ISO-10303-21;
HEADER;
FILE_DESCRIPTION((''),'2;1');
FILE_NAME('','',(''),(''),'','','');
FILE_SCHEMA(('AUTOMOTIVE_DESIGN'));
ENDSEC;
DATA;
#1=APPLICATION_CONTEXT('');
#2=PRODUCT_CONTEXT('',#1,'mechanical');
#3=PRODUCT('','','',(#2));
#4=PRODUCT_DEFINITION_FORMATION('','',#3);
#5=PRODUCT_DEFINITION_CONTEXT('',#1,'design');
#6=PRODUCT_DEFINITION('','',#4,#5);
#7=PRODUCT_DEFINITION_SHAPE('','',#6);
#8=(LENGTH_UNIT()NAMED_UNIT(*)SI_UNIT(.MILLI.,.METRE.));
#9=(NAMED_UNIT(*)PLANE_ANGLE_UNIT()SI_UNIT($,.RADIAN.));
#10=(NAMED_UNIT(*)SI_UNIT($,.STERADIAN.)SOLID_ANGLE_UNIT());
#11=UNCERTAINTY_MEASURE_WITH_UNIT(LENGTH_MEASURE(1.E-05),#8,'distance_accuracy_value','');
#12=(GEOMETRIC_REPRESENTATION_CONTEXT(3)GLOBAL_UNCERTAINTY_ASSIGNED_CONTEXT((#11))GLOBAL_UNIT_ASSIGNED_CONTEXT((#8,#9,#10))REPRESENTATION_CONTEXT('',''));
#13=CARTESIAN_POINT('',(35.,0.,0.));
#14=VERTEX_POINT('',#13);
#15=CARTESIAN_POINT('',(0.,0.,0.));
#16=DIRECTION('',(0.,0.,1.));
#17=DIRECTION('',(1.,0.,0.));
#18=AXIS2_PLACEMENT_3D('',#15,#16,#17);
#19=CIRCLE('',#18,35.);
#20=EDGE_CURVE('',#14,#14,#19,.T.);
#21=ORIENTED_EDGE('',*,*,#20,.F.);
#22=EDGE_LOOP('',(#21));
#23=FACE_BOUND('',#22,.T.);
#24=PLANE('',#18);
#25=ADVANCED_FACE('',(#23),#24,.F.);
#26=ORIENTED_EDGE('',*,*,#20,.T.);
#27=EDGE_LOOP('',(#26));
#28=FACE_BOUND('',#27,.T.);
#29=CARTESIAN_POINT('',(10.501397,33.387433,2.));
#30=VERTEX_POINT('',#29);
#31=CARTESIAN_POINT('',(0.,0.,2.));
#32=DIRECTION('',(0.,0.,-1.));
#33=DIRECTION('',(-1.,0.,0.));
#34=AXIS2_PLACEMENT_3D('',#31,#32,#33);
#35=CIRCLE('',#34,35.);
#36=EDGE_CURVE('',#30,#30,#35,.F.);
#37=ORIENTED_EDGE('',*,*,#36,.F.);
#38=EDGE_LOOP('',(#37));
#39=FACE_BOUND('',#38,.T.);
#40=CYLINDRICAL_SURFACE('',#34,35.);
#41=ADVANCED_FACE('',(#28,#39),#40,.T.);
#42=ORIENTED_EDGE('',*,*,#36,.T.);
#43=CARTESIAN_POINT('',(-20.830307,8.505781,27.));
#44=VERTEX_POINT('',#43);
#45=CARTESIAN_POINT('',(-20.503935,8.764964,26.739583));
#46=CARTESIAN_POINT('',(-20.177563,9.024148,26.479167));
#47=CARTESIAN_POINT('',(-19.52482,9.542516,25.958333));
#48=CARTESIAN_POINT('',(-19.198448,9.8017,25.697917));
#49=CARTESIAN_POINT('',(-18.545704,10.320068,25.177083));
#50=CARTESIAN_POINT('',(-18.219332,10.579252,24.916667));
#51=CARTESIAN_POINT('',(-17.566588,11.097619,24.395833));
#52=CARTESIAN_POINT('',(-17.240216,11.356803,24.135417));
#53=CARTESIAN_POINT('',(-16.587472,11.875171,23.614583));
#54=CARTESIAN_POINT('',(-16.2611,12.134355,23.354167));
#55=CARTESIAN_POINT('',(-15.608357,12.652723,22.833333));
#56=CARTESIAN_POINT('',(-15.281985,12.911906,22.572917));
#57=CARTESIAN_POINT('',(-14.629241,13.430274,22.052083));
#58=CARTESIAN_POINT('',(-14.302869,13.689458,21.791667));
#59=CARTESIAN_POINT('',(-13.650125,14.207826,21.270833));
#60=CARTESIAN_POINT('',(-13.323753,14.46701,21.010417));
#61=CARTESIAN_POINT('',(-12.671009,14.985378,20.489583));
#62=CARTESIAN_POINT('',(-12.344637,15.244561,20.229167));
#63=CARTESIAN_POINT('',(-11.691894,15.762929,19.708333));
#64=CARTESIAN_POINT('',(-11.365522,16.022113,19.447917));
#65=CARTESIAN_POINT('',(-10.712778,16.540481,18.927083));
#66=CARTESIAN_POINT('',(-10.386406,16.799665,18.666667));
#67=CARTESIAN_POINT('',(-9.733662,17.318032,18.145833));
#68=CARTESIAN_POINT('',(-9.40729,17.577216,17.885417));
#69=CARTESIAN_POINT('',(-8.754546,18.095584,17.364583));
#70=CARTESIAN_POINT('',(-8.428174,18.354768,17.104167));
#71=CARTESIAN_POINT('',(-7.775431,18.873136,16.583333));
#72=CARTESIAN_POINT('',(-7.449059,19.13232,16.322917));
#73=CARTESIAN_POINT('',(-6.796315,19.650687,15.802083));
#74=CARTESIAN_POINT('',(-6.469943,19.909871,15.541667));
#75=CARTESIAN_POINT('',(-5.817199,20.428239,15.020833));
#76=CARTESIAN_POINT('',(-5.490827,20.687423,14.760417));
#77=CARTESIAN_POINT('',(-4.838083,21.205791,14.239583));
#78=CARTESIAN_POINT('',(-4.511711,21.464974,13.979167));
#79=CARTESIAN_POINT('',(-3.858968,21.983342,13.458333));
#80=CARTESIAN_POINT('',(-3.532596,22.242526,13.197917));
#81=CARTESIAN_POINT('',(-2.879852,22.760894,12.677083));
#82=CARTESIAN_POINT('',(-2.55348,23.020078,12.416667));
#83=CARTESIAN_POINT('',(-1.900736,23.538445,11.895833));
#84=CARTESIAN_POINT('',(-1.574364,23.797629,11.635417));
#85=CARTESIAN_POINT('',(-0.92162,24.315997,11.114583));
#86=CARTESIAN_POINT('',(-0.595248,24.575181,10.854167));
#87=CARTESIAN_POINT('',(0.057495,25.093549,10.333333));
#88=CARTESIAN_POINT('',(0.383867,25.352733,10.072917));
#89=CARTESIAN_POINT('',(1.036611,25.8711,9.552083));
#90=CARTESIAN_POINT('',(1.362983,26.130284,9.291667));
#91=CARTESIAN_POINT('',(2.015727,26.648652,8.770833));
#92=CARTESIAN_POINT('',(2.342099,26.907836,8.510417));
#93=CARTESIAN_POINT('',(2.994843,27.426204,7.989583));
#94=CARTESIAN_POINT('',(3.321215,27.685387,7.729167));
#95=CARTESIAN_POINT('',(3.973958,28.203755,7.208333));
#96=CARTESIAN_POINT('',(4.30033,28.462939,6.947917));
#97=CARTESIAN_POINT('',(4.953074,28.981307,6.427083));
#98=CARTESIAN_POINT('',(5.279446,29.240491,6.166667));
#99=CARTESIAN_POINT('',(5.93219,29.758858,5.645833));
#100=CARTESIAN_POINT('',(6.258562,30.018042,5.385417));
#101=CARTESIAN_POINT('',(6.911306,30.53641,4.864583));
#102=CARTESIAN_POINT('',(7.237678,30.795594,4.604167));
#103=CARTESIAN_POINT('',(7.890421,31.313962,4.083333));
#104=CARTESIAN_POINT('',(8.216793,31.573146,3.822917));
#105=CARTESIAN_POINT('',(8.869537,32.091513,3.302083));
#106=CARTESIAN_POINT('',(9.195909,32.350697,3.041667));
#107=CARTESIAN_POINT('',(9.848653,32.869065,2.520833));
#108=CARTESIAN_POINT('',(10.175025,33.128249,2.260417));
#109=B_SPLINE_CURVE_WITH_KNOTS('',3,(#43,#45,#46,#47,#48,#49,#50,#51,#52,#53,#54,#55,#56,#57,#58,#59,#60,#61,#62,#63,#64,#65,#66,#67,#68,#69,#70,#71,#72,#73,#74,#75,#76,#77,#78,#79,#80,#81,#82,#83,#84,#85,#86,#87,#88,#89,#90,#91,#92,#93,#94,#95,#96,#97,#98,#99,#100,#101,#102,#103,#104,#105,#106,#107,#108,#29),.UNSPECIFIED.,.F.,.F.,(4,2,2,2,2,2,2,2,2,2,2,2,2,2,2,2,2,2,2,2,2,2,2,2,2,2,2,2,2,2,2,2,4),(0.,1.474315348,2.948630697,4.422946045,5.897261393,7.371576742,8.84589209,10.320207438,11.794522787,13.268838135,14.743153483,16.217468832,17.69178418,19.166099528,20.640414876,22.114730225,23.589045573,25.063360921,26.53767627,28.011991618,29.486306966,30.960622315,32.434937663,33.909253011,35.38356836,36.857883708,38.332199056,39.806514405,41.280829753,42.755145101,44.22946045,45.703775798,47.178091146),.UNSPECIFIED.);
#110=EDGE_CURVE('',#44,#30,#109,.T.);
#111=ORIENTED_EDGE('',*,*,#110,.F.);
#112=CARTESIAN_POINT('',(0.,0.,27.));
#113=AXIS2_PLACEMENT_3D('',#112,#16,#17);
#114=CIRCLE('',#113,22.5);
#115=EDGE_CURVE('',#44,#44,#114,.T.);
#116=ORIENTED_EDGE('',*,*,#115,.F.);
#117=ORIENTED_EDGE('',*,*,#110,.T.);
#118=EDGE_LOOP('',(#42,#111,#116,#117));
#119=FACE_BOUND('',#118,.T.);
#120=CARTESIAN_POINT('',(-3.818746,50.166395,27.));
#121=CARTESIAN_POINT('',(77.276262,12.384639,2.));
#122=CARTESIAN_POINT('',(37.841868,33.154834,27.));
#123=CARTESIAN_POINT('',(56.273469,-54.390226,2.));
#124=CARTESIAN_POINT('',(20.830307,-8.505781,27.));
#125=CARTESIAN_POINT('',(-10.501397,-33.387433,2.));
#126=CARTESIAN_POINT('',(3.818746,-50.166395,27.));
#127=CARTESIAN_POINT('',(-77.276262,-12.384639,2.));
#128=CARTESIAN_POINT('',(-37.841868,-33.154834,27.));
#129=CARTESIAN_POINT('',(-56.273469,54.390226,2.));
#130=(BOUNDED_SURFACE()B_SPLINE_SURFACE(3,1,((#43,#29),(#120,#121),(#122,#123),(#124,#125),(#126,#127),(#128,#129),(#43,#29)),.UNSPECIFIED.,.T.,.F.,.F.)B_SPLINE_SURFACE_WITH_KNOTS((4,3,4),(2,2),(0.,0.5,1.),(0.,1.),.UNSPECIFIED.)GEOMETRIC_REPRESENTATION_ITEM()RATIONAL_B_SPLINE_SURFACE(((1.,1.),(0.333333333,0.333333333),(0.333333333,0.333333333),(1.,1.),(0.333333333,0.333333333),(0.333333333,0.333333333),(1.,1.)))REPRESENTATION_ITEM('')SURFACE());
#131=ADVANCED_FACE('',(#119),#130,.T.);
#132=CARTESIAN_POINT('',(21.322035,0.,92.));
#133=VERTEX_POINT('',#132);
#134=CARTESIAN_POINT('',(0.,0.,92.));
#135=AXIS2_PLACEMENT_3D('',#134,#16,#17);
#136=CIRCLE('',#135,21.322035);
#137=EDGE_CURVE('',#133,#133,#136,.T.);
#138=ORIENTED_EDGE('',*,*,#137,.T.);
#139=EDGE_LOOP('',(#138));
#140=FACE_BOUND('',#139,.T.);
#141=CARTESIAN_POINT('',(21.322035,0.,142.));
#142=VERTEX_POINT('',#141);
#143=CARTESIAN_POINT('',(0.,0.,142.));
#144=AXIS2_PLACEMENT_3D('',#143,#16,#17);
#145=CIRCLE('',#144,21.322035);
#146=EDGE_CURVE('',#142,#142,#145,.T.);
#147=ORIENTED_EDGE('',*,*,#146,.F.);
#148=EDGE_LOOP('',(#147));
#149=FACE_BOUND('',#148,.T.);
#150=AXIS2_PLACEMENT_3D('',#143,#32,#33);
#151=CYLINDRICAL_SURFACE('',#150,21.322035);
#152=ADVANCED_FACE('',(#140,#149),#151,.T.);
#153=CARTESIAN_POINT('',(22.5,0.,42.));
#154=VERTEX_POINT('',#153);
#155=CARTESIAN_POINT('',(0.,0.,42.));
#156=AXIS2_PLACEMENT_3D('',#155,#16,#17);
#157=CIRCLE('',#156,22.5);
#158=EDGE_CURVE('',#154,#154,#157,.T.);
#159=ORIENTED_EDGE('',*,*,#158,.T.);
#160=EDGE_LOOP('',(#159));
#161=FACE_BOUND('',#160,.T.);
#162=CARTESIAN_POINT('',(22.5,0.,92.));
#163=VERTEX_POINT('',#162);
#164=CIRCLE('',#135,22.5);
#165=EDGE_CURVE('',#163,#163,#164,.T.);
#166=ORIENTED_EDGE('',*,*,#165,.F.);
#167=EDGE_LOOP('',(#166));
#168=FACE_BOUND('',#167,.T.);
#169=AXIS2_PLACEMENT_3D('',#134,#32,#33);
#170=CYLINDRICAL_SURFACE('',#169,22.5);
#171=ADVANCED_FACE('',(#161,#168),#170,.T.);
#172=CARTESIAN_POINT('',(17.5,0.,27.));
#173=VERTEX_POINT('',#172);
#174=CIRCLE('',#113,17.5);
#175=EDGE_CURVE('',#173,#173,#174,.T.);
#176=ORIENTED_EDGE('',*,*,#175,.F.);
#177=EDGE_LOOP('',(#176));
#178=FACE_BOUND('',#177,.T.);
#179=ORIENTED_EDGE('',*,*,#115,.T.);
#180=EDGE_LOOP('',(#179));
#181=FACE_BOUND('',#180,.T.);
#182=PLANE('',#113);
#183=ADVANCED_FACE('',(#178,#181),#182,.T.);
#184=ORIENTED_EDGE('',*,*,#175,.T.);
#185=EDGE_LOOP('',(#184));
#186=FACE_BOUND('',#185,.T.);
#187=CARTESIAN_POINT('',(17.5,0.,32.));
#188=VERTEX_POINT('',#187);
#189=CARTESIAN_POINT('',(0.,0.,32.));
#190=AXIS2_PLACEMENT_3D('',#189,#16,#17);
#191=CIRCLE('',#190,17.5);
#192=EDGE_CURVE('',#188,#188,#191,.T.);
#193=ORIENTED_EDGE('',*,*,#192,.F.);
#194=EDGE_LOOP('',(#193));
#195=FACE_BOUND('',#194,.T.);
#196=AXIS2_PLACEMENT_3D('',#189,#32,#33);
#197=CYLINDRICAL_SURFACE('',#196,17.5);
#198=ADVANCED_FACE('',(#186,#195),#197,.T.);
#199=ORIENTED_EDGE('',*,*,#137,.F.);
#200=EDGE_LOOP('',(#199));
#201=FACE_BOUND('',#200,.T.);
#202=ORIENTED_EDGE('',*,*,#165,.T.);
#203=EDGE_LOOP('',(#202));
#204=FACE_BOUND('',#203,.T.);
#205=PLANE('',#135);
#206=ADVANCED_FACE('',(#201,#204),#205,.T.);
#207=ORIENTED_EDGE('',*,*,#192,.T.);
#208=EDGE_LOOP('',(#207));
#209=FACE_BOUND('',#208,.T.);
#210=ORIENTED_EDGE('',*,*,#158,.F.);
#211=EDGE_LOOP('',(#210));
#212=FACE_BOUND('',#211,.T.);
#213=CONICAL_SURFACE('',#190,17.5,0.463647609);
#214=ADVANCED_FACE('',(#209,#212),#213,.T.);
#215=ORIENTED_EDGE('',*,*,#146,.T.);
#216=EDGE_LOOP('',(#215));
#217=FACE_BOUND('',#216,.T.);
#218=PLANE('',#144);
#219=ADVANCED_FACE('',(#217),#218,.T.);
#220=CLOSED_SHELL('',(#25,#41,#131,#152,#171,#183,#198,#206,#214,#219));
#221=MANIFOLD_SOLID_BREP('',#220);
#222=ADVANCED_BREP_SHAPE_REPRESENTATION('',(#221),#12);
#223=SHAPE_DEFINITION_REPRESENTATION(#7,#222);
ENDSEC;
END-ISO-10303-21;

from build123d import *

# Parameters (mm, degrees)
SKETCH_1_R      = 35
EXTRUDE_1_DEPTH = 2
SKETCH_3_R      = 17.5
EXTRUDE_2_DEPTH = 5
SKETCH_4_R      = 22.5
SKETCH_5_R      = 22.5
EXTRUDE_3_DEPTH = 50
SKETCH_6_R      = 21.322035414
EXTRUDE_4_DEPTH = 50


with BuildPart() as part:
    # 스케치1 → 보스-돌출1 (new body)
    with BuildSketch(Plane.XY):
        Circle(SKETCH_1_R)
    extrude(amount=EXTRUDE_1_DEPTH)

    # 로프트1: read off the stored shape, not the designer's step
    # 로프트1: loft between two sections, ruled curve by curve
    loft_1_from = [
        Edge.make_bspline([(-20.830307169, 8.505780579, 27), (-3.81874601, 50.166394916, 27), (37.841868327, 33.154833758, 27), (20.830307169, -8.505780579, 27), (3.81874601, -50.166394916, 27), (-37.841868327, -33.154833758, 27), (-20.830307169, 8.505780579, 27)], [0, 0, 0, 0, 0.5, 0.5, 0.5, 1, 1, 1, 1], 3, [1, 0.333333333, 0.333333333, 1, 0.333333333, 0.333333333, 1]),
    ]
    loft_1_to = [
        Edge.make_bspline([(10.501396718, 33.38743277, 2), (77.276262258, 12.384639333, 2), (56.273468821, -54.390226207, 2), (-10.501396718, -33.38743277, 2), (-77.276262258, -12.384639333, 2), (-56.273468821, 54.390226207, 2), (10.501396718, 33.38743277, 2)], [0, 0, 0, 0, 0.5, 0.5, 0.5, 1, 1, 1, 1], 3, [1, 0.333333333, 0.333333333, 1, 0.333333333, 0.333333333, 1]),
    ]
    loft_1 = Solid(Shell([*[Face.make_surface_from_curves(loft_1_from[k], loft_1_to[k]) for k in range(1)], Face(Wire(loft_1_from)), Face(Wire(loft_1_to))]))
    add(loft_1)

    # 스케치3 → 보스-돌출2 (add)
    with BuildSketch(Plane.XY.offset(27)):
        Circle(SKETCH_3_R)
    extrude(amount=EXTRUDE_2_DEPTH)

    # 스케치4 → section 0 of loft_2
    with BuildSketch(Plane.XY.offset(42), mode=Mode.PRIVATE) as loft_2_s0:
        Circle(SKETCH_4_R)
    # loft up to a face of the part (loft_2)
    loft([loft_2_s0.sketch, Face(Wire([part.edges().sort_by_distance((-11.979574354, 12.75695098, 32))[0]]))])

    # 스케치5 → 보스-돌출3 (add)
    with BuildSketch(Plane.XY.offset(42)):
        Circle(SKETCH_5_R)
    extrude(amount=EXTRUDE_3_DEPTH)

    # 스케치6 → 보스-돌출4 (add)
    with BuildSketch(Plane.XY.offset(92)):
        Circle(SKETCH_6_R)
    extrude(amount=EXTRUDE_4_DEPTH)


solid = part.part
